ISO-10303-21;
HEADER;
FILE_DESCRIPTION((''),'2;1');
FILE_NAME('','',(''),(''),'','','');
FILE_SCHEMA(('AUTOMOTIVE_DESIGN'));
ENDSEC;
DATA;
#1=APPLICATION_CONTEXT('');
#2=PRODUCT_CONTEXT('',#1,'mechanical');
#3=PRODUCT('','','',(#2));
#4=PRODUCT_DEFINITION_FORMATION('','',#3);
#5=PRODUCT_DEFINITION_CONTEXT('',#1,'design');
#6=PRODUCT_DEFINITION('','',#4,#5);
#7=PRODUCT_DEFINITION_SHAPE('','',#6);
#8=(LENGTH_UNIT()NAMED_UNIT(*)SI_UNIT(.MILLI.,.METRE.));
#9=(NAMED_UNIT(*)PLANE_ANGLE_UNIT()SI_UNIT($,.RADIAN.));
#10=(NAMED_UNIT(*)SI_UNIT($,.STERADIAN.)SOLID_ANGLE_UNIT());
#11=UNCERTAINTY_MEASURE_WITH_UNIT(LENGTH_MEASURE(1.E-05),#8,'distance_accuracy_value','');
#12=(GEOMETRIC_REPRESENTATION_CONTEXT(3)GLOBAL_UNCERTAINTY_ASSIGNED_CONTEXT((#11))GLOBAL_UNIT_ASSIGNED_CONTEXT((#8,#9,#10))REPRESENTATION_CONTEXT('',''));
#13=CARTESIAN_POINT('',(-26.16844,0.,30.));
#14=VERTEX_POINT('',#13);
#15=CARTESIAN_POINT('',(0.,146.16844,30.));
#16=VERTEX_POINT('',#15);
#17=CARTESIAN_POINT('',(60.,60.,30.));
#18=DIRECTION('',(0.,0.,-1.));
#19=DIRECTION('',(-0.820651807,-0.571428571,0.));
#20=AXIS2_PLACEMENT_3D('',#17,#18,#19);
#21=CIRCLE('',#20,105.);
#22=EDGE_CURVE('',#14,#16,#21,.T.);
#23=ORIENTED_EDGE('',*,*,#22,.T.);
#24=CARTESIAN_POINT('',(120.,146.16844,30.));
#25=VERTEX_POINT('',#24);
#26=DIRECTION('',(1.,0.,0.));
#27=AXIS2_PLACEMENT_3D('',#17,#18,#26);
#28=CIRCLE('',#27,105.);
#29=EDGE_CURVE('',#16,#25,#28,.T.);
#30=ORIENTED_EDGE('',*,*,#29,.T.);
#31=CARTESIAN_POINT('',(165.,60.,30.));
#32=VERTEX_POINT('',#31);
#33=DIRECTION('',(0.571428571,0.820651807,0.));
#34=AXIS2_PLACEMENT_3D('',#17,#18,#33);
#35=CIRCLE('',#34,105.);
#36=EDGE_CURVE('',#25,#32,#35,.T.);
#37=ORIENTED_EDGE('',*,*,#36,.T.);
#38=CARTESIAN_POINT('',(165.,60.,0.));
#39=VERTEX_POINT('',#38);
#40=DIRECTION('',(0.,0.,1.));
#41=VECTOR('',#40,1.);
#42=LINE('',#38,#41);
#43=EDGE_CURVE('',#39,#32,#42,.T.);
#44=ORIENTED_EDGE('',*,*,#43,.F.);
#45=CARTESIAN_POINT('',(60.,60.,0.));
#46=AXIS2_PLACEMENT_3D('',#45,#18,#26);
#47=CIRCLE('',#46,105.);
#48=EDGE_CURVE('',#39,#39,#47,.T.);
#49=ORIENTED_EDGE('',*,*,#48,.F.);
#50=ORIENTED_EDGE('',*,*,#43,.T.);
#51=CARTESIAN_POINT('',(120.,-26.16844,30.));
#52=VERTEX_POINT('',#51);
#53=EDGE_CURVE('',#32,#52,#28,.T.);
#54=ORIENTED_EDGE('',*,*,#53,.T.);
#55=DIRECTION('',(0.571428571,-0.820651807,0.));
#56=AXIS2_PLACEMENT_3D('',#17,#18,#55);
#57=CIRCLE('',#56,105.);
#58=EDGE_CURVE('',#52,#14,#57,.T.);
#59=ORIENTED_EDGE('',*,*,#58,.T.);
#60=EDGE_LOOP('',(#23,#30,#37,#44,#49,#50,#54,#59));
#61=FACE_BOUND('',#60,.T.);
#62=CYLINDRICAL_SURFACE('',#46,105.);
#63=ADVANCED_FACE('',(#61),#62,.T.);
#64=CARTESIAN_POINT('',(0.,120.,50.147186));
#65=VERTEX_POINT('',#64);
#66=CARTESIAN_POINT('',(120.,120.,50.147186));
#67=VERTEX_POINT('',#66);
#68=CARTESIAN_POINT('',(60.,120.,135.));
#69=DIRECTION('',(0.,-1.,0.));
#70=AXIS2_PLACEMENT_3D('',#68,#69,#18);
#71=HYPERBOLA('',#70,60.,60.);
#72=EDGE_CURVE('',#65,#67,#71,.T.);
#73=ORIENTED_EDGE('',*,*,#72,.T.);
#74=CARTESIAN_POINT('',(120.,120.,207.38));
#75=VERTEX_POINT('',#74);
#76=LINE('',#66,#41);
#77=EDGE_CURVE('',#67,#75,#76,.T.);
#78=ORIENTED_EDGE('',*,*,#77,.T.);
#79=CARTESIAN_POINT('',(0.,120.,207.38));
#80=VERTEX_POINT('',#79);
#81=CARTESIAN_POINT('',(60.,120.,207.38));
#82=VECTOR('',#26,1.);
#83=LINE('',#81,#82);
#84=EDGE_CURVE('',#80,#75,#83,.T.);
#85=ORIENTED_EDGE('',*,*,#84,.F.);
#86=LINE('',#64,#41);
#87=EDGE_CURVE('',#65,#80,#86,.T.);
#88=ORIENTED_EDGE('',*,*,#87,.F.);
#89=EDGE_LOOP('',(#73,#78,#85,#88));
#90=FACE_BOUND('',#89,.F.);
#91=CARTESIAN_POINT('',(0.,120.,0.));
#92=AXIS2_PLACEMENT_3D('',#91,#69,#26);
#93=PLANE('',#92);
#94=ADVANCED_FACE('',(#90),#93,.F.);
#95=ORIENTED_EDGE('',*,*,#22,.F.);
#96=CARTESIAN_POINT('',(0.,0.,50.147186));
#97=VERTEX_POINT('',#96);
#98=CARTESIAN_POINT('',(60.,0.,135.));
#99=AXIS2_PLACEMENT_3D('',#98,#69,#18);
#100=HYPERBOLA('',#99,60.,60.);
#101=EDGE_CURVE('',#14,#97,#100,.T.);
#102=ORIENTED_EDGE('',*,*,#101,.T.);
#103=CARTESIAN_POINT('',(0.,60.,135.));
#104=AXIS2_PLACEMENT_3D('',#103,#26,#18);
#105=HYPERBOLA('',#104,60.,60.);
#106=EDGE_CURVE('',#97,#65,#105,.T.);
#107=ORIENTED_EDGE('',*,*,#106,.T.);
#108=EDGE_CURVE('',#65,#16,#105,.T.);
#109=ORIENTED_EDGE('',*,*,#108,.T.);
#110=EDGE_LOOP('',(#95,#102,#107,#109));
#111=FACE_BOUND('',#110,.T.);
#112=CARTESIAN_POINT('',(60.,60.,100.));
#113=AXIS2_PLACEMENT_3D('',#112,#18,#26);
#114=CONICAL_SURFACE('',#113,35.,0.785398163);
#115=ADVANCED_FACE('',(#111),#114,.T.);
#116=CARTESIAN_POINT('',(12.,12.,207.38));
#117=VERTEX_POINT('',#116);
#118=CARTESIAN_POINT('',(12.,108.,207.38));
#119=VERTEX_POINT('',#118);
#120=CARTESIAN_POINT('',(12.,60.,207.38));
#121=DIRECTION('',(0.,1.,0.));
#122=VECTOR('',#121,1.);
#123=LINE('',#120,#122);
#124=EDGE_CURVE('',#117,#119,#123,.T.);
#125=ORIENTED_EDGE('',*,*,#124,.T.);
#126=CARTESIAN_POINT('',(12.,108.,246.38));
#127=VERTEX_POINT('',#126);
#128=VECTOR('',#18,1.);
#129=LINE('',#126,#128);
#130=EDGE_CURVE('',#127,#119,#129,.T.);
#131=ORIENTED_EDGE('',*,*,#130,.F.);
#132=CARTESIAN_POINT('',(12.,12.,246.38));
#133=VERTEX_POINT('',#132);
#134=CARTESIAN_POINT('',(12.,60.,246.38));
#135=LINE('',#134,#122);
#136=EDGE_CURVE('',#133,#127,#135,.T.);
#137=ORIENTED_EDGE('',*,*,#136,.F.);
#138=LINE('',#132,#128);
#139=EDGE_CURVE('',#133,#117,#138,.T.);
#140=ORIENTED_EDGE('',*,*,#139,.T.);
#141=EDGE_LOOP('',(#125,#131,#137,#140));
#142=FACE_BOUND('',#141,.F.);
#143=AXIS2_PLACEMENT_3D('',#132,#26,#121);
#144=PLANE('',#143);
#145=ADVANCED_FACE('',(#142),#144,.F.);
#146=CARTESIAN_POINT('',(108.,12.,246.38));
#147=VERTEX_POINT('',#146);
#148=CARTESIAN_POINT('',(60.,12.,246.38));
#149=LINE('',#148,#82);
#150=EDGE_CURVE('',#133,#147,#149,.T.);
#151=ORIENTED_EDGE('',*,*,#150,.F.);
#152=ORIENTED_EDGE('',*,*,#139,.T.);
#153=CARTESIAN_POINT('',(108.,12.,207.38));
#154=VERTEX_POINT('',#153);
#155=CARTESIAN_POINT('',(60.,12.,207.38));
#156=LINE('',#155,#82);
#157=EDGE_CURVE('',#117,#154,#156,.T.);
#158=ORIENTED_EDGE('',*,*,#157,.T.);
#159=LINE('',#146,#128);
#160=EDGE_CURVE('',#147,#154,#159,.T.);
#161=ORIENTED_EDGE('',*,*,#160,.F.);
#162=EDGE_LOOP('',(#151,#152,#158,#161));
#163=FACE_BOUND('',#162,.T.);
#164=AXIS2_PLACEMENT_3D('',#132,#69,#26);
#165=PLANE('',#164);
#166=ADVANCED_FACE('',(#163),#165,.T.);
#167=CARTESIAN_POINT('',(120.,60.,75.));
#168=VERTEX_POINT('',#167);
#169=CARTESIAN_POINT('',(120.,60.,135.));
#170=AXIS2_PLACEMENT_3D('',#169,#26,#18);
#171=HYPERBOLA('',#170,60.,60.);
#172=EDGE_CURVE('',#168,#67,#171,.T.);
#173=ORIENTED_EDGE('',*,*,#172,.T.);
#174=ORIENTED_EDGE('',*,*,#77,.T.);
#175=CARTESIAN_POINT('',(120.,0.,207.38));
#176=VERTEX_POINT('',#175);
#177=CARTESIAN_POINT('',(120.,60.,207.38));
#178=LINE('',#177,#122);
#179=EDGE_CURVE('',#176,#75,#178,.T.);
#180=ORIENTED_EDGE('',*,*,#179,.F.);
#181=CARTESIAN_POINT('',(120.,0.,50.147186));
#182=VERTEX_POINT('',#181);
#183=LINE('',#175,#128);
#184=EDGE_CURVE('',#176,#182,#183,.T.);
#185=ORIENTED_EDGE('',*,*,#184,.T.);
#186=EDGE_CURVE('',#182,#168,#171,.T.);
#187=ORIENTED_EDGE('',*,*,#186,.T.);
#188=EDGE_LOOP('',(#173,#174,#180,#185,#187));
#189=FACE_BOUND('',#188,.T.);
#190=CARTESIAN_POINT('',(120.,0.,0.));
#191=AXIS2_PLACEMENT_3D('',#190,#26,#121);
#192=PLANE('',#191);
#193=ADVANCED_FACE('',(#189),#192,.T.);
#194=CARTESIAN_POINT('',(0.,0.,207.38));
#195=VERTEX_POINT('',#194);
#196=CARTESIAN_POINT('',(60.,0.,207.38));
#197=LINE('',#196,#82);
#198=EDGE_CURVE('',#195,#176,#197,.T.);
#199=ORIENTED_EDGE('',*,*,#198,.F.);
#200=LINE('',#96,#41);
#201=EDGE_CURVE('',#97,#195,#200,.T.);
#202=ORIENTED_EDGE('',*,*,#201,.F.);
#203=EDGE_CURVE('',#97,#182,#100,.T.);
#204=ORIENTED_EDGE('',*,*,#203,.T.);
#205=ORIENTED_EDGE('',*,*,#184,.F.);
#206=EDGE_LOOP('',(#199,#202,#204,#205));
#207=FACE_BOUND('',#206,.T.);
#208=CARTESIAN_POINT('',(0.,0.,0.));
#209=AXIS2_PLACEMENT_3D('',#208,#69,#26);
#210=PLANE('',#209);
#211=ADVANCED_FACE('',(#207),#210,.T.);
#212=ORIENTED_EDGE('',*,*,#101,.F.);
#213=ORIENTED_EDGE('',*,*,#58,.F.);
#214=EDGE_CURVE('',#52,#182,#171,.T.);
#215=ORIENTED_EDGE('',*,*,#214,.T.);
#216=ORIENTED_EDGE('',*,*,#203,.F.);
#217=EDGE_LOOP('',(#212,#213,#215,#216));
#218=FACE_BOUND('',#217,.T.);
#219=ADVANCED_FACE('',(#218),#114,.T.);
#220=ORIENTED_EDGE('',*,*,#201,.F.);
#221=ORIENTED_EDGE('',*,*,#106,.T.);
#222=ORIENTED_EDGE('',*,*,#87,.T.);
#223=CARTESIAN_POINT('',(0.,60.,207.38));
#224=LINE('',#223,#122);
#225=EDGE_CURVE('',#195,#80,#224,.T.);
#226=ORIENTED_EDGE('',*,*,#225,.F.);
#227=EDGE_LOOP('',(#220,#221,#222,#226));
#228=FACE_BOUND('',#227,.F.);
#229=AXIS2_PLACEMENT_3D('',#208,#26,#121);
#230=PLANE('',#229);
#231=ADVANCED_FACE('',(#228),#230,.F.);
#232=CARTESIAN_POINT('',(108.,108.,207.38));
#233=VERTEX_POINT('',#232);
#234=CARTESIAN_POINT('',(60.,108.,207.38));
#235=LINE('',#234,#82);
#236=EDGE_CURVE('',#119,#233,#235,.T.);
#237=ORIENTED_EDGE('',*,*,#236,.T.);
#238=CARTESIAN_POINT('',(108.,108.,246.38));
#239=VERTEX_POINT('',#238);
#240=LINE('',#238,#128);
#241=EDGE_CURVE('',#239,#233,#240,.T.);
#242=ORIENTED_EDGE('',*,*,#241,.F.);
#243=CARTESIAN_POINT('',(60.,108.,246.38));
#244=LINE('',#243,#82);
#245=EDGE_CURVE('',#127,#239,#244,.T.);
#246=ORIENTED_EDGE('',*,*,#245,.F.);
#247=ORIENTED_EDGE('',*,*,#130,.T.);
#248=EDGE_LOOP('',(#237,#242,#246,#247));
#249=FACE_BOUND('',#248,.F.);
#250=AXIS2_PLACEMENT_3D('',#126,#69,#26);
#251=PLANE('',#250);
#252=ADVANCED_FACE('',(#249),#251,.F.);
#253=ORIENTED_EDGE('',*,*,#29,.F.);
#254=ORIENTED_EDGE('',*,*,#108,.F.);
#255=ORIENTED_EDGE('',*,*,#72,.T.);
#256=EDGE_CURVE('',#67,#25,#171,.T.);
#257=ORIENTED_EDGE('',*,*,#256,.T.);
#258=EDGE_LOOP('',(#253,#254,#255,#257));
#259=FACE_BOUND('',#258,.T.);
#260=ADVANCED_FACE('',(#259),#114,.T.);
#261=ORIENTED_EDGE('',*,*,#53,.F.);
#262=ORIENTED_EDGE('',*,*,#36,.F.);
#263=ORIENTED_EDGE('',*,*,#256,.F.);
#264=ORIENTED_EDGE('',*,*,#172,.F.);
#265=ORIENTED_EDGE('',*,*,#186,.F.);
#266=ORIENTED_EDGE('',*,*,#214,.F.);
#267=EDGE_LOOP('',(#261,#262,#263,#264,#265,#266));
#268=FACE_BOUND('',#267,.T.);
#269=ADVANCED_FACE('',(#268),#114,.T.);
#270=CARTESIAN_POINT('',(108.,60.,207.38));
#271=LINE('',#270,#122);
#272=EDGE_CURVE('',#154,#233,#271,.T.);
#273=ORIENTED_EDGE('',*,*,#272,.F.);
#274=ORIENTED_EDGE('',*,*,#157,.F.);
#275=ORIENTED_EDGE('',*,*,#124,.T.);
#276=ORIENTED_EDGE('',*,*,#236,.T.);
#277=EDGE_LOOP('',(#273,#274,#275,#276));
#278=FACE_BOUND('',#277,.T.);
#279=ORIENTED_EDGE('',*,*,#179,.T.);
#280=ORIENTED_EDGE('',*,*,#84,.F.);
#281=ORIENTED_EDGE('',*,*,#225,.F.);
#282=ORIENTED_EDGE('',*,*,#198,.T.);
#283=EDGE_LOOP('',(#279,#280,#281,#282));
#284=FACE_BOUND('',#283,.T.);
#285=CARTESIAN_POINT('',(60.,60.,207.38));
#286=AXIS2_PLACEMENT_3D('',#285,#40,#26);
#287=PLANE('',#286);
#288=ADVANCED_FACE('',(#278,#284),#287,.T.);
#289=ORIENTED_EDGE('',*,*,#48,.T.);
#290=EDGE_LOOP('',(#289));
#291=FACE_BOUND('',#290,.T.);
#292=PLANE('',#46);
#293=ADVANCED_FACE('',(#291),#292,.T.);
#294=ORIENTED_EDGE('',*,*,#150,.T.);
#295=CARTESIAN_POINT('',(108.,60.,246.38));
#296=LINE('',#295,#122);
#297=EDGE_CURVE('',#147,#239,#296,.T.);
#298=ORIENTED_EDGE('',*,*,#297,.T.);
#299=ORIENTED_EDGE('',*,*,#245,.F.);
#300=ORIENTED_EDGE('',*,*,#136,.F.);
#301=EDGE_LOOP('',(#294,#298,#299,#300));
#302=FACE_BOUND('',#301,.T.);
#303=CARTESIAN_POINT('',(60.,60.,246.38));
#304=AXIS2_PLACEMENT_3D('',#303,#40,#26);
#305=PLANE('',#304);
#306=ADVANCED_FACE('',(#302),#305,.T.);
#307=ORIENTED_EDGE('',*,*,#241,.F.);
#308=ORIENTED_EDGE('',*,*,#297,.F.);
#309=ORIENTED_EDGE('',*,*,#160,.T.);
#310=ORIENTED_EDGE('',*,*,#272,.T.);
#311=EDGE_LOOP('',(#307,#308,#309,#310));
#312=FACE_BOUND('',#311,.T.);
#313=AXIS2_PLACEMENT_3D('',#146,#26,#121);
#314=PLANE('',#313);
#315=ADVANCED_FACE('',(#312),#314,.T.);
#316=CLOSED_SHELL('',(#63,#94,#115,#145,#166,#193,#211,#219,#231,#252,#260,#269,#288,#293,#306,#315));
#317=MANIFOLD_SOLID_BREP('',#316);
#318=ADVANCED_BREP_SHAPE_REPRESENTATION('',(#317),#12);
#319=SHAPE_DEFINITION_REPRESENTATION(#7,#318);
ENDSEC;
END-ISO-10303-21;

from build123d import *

# Parameters (mm, degrees)
F0_W     = 120
F0_H     = 120
F1_DEPTH = 246.38
F2_W     = 120
F2_H     = 120
F2_W_2   = 96
F2_H_2   = 96
F3_DEPTH = 39
F4_R     = 105
F4_W     = 120
F4_H     = 120
F5_DEPTH = 100
F7_DEPTH = 80


# Not quite as in the source:
# - a fillet or chamfer that OpenCascade refuses, or shapes differently, is made with other operations: its cross-section is extruded or revolved along the edge and cut away or added


with BuildPart() as f1:
    # F0 (on Top) → F1 (new body)
    with BuildSketch(Plane.XY):
        with Locations((60, 60)):
            Rectangle(F0_W, F0_H)
    extrude(amount=F1_DEPTH)

    # F2 (on face) → F3 (cut)
    with BuildSketch(Plane.XY.offset(246.38)):
        with Locations((60, 60)):
            Rectangle(F2_W, F2_H)
        with Locations((60, 60)):
            Rectangle(F2_W_2, F2_H_2, mode=Mode.SUBTRACT)
    extrude(amount=-F3_DEPTH, mode=Mode.SUBTRACT)

    # F4 (on face) → F5 (join)
    with BuildSketch(Plane(origin=(0, 0, 0), x_dir=(1, 0, 0), z_dir=(0, 0, -1))):
        with Locations((60, -60)):
            Circle(F4_R)
        with Locations((60, -60)):
            Rectangle(F4_W, F4_H, mode=Mode.SUBTRACT)
    extrude(amount=-F5_DEPTH)

    # F6: chamfer of 70 on 1 edges, made by hand


with BuildPart() as f6_tool2:
    # F6_s3 → F6_t4 (revolve)
    with BuildSketch(Plane.XZ.offset(-60)):
        Polygon((95, 100), (165, 30), (165, 100), align=None)
    revolve(axis=Axis((60, 60, 100), (0, 0, -1)))

    split(bisect_by=Plane.YZ.offset(120), keep=Keep.TOP)


with BuildPart() as f1_1:
    add(f1.part)

    # F6_t1: cut F6_tool2
    add(f6_tool2.part, mode=Mode.SUBTRACT)


with BuildPart() as f6_tool7:
    # F6_s8 → F6_t9 (revolve)
    with BuildSketch(Plane.XZ.offset(-60)):
        Polygon((95, 100), (165, 30), (165, 100), align=None)
    revolve(axis=Axis((60, 60, 100), (0, 0, -1)))

    split(bisect_by=Plane.XZ, keep=Keep.TOP)


with BuildPart() as f1_2:
    add(f1_1.part)

    # F6_t6: cut F6_tool7
    add(f6_tool7.part, mode=Mode.SUBTRACT)


with BuildPart() as f6_tool12:
    # F6_s13 → F6_t14 (revolve)
    with BuildSketch(Plane.XZ.offset(-60)):
        Polygon((95, 100), (165, 30), (165, 100), align=None)
    revolve(axis=Axis((60, 60, 100), (0, 0, -1)))

    split(bisect_by=Plane.YZ, keep=Keep.BOTTOM)


with BuildPart() as f1_3:
    add(f1_2.part)

    # F6_t11: cut F6_tool12
    add(f6_tool12.part, mode=Mode.SUBTRACT)


with BuildPart() as f6_tool17:
    # F6_s18 → F6_t19 (revolve)
    with BuildSketch(Plane.XZ.offset(-60)):
        Polygon((95, 100), (165, 30), (165, 100), align=None)
    revolve(axis=Axis((60, 60, 100), (0, 0, -1)))

    split(bisect_by=Plane.XZ.offset(-120), keep=Keep.BOTTOM)


with BuildPart() as f1_4:
    add(f1_3.part)

    # F6_t16: cut F6_tool17
    add(f6_tool17.part, mode=Mode.SUBTRACT)


with BuildPart() as f7:
    # F7 (new): a face of the model
    f7_faces = [f1_4.part.faces().sort_by_distance(p)[0] for p in [
        (60, 118.3029437252, 207.38),
    ]]
    extrude(f7_faces, amount=F7_DEPTH)


solid = f1_4.part
